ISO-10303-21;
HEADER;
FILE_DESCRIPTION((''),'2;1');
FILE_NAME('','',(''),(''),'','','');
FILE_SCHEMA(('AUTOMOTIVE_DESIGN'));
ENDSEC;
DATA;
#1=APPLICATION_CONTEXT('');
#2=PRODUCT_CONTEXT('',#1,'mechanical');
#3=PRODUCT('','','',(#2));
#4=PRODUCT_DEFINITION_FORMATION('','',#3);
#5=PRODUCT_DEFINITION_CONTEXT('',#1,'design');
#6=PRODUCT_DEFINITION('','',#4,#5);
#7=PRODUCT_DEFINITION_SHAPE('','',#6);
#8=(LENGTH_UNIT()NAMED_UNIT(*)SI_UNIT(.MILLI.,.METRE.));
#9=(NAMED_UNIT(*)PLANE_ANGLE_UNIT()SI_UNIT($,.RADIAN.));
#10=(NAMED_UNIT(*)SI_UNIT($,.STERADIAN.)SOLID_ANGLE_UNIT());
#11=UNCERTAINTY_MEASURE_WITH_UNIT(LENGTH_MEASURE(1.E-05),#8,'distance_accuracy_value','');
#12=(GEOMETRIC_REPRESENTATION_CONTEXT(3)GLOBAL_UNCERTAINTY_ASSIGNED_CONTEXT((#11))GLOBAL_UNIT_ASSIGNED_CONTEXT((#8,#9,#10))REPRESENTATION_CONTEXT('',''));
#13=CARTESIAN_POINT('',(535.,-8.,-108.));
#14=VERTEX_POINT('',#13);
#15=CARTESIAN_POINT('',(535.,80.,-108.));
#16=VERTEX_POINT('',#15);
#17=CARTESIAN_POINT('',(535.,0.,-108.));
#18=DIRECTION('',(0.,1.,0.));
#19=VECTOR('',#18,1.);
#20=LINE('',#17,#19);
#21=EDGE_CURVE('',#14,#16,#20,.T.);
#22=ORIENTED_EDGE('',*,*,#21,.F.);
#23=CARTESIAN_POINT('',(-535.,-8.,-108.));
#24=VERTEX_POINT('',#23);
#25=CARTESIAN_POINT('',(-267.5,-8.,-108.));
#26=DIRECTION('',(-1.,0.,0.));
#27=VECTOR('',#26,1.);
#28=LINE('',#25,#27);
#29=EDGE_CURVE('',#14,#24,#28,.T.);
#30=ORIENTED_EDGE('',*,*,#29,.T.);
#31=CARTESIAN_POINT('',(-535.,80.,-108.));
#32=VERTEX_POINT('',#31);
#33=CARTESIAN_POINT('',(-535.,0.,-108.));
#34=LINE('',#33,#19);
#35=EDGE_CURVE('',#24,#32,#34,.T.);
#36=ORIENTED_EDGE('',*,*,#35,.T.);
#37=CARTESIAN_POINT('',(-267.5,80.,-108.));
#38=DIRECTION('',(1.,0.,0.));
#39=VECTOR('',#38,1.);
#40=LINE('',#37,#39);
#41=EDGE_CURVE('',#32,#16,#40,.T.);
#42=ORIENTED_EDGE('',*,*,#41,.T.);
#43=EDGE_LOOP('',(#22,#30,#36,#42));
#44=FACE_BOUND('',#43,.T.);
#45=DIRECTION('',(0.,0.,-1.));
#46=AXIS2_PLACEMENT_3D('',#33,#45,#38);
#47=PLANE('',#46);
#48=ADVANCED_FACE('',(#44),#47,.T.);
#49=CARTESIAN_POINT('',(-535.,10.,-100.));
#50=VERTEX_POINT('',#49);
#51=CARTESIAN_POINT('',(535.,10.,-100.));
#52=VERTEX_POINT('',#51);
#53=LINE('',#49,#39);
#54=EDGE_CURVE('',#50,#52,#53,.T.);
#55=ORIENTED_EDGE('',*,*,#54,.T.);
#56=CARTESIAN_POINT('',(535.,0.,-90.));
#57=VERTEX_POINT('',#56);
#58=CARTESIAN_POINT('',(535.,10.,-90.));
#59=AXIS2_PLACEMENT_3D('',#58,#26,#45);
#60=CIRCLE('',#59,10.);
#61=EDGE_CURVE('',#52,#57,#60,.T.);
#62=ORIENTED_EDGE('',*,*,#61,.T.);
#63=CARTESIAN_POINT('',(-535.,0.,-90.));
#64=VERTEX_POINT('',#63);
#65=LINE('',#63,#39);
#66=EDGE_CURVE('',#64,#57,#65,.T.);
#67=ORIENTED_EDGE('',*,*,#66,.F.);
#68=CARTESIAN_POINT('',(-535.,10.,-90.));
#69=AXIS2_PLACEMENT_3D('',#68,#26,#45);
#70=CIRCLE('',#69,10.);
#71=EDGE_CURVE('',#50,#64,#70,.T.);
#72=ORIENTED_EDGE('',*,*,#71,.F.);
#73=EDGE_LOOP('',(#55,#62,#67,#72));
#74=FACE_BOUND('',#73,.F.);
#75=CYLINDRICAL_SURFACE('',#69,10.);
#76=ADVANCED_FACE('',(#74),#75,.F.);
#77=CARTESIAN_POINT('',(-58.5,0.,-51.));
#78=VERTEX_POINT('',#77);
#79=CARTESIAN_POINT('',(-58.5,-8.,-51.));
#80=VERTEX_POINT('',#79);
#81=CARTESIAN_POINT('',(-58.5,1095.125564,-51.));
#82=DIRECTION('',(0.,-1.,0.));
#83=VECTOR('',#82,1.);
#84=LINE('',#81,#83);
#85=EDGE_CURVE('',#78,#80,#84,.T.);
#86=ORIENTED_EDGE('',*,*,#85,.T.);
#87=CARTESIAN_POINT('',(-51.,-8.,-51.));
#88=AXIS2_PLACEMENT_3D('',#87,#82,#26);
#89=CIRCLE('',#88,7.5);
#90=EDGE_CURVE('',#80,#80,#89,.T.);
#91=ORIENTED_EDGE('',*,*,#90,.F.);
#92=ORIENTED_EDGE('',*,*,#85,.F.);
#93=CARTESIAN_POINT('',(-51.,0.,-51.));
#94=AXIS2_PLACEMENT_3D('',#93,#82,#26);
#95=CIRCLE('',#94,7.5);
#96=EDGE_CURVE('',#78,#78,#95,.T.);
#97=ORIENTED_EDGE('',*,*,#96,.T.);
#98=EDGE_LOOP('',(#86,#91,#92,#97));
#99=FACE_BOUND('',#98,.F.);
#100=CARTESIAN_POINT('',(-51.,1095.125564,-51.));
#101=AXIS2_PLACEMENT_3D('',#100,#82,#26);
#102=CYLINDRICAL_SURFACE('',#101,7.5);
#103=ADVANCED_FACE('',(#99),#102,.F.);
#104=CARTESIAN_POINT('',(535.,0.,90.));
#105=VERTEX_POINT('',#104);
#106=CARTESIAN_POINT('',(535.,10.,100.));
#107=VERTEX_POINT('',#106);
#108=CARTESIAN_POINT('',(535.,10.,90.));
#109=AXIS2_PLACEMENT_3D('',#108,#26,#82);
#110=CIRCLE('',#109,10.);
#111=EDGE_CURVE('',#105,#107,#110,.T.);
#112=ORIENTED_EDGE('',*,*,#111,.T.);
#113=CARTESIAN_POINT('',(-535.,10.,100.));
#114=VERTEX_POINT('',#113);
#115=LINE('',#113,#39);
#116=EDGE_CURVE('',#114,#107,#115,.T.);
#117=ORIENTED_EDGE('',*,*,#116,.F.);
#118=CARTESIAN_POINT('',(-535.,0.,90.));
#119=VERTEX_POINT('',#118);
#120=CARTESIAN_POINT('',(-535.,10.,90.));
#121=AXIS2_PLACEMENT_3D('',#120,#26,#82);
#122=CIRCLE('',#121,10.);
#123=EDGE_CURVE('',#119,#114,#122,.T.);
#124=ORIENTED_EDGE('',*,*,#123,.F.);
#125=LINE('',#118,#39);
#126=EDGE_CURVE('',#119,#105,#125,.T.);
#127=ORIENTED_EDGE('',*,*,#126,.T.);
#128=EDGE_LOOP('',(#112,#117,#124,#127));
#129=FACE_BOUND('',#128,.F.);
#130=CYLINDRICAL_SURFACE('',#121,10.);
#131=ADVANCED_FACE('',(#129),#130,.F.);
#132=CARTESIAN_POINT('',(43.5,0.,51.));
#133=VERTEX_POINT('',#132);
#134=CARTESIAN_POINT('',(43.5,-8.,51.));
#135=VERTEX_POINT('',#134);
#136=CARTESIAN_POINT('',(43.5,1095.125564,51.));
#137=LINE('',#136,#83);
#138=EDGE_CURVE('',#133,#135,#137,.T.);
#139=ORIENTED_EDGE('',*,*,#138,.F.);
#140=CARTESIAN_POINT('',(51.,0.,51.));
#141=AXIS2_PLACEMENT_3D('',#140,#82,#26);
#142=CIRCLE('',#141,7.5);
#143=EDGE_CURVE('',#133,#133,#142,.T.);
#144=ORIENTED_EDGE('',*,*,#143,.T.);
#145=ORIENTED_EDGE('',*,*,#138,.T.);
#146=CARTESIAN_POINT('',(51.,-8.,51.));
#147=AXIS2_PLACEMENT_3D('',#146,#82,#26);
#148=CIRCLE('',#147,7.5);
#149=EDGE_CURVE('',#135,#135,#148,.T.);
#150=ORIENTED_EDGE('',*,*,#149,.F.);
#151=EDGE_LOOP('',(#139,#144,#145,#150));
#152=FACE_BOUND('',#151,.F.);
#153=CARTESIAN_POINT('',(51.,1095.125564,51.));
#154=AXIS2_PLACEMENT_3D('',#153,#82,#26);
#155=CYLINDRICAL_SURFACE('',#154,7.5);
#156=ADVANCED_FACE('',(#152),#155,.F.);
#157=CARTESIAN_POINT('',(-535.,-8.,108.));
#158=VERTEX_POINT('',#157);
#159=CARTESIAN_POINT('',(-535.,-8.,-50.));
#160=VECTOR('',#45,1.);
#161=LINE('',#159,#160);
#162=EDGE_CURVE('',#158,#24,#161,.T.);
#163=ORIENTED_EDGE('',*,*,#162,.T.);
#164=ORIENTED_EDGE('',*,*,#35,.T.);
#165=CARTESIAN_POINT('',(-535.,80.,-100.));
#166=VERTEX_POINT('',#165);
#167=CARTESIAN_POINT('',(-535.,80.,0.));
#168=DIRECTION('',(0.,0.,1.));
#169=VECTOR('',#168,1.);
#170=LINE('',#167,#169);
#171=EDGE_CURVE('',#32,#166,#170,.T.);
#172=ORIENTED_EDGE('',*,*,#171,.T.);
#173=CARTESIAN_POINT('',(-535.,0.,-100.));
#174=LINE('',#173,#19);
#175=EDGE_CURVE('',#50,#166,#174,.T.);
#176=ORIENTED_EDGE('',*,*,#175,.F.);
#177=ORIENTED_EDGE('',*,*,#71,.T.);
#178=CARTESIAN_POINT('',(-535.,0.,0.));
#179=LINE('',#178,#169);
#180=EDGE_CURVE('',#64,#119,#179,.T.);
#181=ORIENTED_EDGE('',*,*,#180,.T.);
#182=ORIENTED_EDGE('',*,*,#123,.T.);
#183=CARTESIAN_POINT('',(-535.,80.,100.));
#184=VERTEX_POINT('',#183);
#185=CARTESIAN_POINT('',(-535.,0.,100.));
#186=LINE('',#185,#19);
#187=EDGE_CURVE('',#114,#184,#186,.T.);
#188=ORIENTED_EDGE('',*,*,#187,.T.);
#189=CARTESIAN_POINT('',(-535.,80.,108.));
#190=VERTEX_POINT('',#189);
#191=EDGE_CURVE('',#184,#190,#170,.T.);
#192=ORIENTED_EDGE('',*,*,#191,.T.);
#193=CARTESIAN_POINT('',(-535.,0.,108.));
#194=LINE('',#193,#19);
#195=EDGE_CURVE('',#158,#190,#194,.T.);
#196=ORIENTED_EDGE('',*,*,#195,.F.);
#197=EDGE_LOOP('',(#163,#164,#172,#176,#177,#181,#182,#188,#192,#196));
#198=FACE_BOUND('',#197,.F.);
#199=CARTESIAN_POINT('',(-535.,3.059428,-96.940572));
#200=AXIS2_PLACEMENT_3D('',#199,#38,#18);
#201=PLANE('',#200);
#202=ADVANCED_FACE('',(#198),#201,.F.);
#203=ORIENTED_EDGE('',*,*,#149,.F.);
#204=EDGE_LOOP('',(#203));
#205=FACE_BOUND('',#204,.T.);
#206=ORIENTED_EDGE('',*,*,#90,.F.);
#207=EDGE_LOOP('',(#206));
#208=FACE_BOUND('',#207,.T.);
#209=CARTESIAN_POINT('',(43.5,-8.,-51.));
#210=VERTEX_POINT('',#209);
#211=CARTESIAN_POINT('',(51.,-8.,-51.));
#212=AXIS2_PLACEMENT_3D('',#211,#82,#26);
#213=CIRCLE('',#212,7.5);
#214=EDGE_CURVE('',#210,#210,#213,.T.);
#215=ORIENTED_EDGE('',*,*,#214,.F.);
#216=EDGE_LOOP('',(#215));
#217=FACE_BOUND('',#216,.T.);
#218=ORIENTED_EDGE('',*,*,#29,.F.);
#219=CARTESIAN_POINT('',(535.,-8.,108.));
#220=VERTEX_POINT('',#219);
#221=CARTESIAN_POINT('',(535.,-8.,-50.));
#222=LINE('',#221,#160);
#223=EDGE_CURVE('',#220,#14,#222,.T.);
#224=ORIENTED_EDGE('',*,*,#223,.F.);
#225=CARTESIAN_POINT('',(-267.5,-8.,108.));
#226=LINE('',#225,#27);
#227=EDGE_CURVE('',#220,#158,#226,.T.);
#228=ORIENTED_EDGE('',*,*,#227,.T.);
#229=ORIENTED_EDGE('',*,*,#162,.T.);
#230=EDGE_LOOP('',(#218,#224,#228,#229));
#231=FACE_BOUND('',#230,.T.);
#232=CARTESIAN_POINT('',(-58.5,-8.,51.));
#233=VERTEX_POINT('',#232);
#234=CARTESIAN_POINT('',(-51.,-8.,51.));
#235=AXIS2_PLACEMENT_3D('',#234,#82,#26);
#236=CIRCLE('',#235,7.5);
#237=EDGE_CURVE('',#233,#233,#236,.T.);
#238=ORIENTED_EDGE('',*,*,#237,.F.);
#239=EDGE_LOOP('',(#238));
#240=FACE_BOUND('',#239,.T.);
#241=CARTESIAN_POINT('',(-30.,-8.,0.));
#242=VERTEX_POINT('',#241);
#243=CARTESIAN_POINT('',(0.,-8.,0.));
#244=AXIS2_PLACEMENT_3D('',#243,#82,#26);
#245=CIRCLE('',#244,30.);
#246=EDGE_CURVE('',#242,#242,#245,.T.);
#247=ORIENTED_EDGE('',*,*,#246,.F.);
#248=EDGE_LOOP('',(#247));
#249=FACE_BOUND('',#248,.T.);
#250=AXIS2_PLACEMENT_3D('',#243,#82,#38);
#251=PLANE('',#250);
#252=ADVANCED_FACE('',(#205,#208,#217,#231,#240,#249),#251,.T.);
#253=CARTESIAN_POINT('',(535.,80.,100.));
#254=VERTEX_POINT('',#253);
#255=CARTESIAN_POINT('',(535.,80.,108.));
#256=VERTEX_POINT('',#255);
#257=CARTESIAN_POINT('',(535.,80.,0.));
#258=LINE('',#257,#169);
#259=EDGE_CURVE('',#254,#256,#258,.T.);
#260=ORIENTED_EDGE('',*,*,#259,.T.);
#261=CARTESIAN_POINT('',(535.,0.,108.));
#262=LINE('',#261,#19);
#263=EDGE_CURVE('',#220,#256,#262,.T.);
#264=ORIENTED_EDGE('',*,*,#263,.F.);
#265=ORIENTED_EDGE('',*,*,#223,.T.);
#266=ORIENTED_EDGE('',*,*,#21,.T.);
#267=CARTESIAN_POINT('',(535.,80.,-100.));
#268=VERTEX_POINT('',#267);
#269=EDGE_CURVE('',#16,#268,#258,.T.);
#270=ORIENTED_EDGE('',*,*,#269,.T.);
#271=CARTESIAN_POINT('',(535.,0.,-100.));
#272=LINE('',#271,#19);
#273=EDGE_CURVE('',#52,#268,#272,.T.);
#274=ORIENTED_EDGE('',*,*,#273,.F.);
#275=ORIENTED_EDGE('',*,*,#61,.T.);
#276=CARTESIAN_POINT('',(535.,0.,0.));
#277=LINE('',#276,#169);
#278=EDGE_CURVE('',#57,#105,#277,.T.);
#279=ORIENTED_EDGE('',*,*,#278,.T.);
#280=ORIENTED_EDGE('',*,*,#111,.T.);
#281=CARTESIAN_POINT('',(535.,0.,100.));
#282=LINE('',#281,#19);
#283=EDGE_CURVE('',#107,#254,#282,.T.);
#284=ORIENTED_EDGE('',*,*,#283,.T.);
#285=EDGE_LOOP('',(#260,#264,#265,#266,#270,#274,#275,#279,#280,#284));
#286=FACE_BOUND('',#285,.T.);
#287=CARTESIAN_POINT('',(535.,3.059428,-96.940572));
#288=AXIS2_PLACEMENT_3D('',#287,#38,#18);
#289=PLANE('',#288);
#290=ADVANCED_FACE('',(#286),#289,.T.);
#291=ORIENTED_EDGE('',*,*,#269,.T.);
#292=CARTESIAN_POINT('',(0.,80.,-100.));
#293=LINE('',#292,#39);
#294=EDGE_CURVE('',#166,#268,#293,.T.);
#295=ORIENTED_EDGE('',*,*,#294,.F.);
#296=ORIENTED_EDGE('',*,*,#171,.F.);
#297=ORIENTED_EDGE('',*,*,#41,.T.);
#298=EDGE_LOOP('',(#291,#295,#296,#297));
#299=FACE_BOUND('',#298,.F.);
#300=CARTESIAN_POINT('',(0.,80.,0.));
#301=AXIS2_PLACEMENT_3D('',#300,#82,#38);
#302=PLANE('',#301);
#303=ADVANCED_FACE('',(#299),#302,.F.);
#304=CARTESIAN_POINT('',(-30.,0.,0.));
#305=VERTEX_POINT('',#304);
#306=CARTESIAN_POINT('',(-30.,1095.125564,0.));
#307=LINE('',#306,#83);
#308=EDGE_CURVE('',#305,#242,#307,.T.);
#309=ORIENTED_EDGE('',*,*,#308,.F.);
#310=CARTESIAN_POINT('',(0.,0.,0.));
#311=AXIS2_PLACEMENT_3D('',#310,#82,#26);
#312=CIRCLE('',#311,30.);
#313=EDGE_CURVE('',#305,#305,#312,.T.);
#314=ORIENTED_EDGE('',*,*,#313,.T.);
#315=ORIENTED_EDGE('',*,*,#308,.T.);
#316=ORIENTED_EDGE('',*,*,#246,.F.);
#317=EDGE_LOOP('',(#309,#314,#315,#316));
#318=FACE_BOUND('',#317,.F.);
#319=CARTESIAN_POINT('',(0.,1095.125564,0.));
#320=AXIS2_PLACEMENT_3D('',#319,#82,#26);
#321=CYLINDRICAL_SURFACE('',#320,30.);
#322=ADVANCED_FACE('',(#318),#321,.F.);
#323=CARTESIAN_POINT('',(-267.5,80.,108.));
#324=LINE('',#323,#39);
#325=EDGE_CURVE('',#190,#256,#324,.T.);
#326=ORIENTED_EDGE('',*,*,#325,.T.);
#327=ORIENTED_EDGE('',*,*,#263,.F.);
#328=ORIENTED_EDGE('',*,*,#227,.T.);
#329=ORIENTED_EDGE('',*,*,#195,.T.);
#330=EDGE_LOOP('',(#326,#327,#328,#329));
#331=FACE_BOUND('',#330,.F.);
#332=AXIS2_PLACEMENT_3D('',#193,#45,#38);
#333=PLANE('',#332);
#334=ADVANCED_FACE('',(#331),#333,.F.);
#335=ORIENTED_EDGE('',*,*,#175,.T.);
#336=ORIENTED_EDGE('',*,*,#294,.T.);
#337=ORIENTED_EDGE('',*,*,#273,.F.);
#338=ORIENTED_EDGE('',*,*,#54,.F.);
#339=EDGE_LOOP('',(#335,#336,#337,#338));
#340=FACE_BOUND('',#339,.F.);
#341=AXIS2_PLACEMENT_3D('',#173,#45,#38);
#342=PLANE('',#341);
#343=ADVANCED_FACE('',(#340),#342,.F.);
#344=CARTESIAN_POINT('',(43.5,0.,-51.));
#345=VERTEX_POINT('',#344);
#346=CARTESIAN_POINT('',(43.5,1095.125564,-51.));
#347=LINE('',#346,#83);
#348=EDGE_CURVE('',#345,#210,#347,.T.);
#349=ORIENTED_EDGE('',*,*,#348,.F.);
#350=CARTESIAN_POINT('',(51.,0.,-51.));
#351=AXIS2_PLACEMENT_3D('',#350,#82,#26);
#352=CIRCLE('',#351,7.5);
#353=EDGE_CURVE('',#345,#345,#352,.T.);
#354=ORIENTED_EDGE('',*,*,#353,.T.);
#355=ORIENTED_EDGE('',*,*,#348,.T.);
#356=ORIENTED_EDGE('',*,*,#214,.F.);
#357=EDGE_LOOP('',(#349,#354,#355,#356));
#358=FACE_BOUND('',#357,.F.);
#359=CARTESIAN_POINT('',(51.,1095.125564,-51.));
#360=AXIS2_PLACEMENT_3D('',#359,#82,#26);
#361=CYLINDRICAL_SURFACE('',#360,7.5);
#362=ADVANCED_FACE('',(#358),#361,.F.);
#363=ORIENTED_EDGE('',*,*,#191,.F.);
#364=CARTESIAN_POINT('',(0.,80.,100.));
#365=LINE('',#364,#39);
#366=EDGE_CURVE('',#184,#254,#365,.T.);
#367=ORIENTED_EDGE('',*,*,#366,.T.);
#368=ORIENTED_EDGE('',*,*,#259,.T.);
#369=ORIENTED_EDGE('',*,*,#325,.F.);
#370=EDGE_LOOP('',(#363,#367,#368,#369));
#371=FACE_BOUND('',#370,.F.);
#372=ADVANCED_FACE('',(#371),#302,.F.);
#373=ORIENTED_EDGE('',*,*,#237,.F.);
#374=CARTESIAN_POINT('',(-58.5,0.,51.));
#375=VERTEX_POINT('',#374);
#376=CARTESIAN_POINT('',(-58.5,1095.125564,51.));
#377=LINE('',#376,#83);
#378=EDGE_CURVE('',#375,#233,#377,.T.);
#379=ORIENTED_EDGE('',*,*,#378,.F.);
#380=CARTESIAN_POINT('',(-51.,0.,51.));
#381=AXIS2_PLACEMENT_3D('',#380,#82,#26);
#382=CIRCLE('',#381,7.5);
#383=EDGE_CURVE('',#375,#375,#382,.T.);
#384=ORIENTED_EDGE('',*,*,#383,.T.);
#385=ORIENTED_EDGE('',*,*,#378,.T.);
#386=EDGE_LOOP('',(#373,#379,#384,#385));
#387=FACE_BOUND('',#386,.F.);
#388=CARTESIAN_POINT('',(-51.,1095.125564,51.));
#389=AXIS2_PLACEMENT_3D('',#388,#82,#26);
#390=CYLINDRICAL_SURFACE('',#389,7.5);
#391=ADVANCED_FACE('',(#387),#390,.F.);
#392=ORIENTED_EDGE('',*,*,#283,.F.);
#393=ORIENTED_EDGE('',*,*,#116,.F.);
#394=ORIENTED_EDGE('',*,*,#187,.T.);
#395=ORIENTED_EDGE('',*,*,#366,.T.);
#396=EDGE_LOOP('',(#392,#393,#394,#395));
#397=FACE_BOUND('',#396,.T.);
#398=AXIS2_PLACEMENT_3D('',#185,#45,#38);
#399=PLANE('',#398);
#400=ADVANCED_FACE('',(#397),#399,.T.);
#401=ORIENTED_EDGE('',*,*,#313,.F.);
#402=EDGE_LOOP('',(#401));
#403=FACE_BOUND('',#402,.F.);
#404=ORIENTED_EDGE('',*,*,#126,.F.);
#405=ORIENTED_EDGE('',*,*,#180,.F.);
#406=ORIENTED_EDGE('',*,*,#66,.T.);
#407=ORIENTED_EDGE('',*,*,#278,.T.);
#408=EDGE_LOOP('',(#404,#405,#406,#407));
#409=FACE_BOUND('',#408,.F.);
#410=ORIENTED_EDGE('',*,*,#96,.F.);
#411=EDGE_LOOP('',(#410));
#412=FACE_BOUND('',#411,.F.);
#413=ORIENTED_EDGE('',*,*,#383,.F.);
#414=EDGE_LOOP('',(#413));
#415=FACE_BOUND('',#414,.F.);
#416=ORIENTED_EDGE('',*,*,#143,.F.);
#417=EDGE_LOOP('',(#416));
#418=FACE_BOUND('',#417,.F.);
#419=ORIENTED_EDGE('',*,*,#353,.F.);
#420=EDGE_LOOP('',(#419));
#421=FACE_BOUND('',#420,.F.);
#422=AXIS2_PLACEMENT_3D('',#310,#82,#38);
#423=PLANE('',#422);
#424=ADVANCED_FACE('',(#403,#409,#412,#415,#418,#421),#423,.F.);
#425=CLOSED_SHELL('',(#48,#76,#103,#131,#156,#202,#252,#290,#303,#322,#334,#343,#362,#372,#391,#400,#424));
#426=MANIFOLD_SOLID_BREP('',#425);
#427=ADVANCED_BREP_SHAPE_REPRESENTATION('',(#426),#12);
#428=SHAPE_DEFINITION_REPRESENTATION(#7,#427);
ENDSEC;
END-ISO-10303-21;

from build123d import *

# Parameters (mm, degrees)
F0_W        = 1070
F0_H        = 200
F1_DEPTH    = 80
F2_T        = 8
F3_T1_DEPTH = 1070
F4_D        = 60
F5_D        = 15


# Not quite as in the source:
# - a fillet or chamfer that OpenCascade refuses, or shapes differently, is made with other operations: its cross-section is extruded or revolved along the edge and cut away or added


with BuildPart() as f1:
    # F0 (on Front) → F1 (new body)
    with BuildSketch(Plane.XZ):
        Rectangle(F0_W, F0_H)
    extrude(amount=-F1_DEPTH)

    # F2
    f2_openings = [f1.faces().sort_by_distance(p)[0] for p in [
        (0, 80, 0),
        (535, 40, 0),
        (-535, 40, 0),
    ]]
    offset(amount=F2_T, openings=f2_openings, kind=Kind.INTERSECTION)

    # F3: fillet of radius 10 on 2 edges, made by hand

    # F3_s2 → F3_t1 (join)
    with BuildSketch(Plane.YZ.offset(-535)):
        with BuildLine():
            ThreePointArc((10, -100), (2.9289321881, -97.0710678119), (0, -90))
            Line((0, -90), (0, -100))
            Line((0, -100), (10, -100))
        make_face()
        with BuildLine():
            ThreePointArc((0, 90), (2.9289321881, 97.0710678119), (10, 100))
            Line((10, 100), (0, 100))
            Line((0, 100), (0, 90))
        make_face()
    extrude(amount=F3_T1_DEPTH)

    # F4 (through all)
    with Locations(Plane(origin=(0, 0, 0), x_dir=(1, 0, 0), z_dir=(0, 1, 0))):
        with Locations((0, 0)):
            Hole(F4_D / 2)

    # F5 (through all)
    with Locations(Plane(origin=(0, 0, 0), x_dir=(1, 0, 0), z_dir=(0, 1, 0))):
        with Locations((-51, -51), (51, -51), (51, 51), (-51, 51)):
            Hole(F5_D / 2)


solid = f1.part
